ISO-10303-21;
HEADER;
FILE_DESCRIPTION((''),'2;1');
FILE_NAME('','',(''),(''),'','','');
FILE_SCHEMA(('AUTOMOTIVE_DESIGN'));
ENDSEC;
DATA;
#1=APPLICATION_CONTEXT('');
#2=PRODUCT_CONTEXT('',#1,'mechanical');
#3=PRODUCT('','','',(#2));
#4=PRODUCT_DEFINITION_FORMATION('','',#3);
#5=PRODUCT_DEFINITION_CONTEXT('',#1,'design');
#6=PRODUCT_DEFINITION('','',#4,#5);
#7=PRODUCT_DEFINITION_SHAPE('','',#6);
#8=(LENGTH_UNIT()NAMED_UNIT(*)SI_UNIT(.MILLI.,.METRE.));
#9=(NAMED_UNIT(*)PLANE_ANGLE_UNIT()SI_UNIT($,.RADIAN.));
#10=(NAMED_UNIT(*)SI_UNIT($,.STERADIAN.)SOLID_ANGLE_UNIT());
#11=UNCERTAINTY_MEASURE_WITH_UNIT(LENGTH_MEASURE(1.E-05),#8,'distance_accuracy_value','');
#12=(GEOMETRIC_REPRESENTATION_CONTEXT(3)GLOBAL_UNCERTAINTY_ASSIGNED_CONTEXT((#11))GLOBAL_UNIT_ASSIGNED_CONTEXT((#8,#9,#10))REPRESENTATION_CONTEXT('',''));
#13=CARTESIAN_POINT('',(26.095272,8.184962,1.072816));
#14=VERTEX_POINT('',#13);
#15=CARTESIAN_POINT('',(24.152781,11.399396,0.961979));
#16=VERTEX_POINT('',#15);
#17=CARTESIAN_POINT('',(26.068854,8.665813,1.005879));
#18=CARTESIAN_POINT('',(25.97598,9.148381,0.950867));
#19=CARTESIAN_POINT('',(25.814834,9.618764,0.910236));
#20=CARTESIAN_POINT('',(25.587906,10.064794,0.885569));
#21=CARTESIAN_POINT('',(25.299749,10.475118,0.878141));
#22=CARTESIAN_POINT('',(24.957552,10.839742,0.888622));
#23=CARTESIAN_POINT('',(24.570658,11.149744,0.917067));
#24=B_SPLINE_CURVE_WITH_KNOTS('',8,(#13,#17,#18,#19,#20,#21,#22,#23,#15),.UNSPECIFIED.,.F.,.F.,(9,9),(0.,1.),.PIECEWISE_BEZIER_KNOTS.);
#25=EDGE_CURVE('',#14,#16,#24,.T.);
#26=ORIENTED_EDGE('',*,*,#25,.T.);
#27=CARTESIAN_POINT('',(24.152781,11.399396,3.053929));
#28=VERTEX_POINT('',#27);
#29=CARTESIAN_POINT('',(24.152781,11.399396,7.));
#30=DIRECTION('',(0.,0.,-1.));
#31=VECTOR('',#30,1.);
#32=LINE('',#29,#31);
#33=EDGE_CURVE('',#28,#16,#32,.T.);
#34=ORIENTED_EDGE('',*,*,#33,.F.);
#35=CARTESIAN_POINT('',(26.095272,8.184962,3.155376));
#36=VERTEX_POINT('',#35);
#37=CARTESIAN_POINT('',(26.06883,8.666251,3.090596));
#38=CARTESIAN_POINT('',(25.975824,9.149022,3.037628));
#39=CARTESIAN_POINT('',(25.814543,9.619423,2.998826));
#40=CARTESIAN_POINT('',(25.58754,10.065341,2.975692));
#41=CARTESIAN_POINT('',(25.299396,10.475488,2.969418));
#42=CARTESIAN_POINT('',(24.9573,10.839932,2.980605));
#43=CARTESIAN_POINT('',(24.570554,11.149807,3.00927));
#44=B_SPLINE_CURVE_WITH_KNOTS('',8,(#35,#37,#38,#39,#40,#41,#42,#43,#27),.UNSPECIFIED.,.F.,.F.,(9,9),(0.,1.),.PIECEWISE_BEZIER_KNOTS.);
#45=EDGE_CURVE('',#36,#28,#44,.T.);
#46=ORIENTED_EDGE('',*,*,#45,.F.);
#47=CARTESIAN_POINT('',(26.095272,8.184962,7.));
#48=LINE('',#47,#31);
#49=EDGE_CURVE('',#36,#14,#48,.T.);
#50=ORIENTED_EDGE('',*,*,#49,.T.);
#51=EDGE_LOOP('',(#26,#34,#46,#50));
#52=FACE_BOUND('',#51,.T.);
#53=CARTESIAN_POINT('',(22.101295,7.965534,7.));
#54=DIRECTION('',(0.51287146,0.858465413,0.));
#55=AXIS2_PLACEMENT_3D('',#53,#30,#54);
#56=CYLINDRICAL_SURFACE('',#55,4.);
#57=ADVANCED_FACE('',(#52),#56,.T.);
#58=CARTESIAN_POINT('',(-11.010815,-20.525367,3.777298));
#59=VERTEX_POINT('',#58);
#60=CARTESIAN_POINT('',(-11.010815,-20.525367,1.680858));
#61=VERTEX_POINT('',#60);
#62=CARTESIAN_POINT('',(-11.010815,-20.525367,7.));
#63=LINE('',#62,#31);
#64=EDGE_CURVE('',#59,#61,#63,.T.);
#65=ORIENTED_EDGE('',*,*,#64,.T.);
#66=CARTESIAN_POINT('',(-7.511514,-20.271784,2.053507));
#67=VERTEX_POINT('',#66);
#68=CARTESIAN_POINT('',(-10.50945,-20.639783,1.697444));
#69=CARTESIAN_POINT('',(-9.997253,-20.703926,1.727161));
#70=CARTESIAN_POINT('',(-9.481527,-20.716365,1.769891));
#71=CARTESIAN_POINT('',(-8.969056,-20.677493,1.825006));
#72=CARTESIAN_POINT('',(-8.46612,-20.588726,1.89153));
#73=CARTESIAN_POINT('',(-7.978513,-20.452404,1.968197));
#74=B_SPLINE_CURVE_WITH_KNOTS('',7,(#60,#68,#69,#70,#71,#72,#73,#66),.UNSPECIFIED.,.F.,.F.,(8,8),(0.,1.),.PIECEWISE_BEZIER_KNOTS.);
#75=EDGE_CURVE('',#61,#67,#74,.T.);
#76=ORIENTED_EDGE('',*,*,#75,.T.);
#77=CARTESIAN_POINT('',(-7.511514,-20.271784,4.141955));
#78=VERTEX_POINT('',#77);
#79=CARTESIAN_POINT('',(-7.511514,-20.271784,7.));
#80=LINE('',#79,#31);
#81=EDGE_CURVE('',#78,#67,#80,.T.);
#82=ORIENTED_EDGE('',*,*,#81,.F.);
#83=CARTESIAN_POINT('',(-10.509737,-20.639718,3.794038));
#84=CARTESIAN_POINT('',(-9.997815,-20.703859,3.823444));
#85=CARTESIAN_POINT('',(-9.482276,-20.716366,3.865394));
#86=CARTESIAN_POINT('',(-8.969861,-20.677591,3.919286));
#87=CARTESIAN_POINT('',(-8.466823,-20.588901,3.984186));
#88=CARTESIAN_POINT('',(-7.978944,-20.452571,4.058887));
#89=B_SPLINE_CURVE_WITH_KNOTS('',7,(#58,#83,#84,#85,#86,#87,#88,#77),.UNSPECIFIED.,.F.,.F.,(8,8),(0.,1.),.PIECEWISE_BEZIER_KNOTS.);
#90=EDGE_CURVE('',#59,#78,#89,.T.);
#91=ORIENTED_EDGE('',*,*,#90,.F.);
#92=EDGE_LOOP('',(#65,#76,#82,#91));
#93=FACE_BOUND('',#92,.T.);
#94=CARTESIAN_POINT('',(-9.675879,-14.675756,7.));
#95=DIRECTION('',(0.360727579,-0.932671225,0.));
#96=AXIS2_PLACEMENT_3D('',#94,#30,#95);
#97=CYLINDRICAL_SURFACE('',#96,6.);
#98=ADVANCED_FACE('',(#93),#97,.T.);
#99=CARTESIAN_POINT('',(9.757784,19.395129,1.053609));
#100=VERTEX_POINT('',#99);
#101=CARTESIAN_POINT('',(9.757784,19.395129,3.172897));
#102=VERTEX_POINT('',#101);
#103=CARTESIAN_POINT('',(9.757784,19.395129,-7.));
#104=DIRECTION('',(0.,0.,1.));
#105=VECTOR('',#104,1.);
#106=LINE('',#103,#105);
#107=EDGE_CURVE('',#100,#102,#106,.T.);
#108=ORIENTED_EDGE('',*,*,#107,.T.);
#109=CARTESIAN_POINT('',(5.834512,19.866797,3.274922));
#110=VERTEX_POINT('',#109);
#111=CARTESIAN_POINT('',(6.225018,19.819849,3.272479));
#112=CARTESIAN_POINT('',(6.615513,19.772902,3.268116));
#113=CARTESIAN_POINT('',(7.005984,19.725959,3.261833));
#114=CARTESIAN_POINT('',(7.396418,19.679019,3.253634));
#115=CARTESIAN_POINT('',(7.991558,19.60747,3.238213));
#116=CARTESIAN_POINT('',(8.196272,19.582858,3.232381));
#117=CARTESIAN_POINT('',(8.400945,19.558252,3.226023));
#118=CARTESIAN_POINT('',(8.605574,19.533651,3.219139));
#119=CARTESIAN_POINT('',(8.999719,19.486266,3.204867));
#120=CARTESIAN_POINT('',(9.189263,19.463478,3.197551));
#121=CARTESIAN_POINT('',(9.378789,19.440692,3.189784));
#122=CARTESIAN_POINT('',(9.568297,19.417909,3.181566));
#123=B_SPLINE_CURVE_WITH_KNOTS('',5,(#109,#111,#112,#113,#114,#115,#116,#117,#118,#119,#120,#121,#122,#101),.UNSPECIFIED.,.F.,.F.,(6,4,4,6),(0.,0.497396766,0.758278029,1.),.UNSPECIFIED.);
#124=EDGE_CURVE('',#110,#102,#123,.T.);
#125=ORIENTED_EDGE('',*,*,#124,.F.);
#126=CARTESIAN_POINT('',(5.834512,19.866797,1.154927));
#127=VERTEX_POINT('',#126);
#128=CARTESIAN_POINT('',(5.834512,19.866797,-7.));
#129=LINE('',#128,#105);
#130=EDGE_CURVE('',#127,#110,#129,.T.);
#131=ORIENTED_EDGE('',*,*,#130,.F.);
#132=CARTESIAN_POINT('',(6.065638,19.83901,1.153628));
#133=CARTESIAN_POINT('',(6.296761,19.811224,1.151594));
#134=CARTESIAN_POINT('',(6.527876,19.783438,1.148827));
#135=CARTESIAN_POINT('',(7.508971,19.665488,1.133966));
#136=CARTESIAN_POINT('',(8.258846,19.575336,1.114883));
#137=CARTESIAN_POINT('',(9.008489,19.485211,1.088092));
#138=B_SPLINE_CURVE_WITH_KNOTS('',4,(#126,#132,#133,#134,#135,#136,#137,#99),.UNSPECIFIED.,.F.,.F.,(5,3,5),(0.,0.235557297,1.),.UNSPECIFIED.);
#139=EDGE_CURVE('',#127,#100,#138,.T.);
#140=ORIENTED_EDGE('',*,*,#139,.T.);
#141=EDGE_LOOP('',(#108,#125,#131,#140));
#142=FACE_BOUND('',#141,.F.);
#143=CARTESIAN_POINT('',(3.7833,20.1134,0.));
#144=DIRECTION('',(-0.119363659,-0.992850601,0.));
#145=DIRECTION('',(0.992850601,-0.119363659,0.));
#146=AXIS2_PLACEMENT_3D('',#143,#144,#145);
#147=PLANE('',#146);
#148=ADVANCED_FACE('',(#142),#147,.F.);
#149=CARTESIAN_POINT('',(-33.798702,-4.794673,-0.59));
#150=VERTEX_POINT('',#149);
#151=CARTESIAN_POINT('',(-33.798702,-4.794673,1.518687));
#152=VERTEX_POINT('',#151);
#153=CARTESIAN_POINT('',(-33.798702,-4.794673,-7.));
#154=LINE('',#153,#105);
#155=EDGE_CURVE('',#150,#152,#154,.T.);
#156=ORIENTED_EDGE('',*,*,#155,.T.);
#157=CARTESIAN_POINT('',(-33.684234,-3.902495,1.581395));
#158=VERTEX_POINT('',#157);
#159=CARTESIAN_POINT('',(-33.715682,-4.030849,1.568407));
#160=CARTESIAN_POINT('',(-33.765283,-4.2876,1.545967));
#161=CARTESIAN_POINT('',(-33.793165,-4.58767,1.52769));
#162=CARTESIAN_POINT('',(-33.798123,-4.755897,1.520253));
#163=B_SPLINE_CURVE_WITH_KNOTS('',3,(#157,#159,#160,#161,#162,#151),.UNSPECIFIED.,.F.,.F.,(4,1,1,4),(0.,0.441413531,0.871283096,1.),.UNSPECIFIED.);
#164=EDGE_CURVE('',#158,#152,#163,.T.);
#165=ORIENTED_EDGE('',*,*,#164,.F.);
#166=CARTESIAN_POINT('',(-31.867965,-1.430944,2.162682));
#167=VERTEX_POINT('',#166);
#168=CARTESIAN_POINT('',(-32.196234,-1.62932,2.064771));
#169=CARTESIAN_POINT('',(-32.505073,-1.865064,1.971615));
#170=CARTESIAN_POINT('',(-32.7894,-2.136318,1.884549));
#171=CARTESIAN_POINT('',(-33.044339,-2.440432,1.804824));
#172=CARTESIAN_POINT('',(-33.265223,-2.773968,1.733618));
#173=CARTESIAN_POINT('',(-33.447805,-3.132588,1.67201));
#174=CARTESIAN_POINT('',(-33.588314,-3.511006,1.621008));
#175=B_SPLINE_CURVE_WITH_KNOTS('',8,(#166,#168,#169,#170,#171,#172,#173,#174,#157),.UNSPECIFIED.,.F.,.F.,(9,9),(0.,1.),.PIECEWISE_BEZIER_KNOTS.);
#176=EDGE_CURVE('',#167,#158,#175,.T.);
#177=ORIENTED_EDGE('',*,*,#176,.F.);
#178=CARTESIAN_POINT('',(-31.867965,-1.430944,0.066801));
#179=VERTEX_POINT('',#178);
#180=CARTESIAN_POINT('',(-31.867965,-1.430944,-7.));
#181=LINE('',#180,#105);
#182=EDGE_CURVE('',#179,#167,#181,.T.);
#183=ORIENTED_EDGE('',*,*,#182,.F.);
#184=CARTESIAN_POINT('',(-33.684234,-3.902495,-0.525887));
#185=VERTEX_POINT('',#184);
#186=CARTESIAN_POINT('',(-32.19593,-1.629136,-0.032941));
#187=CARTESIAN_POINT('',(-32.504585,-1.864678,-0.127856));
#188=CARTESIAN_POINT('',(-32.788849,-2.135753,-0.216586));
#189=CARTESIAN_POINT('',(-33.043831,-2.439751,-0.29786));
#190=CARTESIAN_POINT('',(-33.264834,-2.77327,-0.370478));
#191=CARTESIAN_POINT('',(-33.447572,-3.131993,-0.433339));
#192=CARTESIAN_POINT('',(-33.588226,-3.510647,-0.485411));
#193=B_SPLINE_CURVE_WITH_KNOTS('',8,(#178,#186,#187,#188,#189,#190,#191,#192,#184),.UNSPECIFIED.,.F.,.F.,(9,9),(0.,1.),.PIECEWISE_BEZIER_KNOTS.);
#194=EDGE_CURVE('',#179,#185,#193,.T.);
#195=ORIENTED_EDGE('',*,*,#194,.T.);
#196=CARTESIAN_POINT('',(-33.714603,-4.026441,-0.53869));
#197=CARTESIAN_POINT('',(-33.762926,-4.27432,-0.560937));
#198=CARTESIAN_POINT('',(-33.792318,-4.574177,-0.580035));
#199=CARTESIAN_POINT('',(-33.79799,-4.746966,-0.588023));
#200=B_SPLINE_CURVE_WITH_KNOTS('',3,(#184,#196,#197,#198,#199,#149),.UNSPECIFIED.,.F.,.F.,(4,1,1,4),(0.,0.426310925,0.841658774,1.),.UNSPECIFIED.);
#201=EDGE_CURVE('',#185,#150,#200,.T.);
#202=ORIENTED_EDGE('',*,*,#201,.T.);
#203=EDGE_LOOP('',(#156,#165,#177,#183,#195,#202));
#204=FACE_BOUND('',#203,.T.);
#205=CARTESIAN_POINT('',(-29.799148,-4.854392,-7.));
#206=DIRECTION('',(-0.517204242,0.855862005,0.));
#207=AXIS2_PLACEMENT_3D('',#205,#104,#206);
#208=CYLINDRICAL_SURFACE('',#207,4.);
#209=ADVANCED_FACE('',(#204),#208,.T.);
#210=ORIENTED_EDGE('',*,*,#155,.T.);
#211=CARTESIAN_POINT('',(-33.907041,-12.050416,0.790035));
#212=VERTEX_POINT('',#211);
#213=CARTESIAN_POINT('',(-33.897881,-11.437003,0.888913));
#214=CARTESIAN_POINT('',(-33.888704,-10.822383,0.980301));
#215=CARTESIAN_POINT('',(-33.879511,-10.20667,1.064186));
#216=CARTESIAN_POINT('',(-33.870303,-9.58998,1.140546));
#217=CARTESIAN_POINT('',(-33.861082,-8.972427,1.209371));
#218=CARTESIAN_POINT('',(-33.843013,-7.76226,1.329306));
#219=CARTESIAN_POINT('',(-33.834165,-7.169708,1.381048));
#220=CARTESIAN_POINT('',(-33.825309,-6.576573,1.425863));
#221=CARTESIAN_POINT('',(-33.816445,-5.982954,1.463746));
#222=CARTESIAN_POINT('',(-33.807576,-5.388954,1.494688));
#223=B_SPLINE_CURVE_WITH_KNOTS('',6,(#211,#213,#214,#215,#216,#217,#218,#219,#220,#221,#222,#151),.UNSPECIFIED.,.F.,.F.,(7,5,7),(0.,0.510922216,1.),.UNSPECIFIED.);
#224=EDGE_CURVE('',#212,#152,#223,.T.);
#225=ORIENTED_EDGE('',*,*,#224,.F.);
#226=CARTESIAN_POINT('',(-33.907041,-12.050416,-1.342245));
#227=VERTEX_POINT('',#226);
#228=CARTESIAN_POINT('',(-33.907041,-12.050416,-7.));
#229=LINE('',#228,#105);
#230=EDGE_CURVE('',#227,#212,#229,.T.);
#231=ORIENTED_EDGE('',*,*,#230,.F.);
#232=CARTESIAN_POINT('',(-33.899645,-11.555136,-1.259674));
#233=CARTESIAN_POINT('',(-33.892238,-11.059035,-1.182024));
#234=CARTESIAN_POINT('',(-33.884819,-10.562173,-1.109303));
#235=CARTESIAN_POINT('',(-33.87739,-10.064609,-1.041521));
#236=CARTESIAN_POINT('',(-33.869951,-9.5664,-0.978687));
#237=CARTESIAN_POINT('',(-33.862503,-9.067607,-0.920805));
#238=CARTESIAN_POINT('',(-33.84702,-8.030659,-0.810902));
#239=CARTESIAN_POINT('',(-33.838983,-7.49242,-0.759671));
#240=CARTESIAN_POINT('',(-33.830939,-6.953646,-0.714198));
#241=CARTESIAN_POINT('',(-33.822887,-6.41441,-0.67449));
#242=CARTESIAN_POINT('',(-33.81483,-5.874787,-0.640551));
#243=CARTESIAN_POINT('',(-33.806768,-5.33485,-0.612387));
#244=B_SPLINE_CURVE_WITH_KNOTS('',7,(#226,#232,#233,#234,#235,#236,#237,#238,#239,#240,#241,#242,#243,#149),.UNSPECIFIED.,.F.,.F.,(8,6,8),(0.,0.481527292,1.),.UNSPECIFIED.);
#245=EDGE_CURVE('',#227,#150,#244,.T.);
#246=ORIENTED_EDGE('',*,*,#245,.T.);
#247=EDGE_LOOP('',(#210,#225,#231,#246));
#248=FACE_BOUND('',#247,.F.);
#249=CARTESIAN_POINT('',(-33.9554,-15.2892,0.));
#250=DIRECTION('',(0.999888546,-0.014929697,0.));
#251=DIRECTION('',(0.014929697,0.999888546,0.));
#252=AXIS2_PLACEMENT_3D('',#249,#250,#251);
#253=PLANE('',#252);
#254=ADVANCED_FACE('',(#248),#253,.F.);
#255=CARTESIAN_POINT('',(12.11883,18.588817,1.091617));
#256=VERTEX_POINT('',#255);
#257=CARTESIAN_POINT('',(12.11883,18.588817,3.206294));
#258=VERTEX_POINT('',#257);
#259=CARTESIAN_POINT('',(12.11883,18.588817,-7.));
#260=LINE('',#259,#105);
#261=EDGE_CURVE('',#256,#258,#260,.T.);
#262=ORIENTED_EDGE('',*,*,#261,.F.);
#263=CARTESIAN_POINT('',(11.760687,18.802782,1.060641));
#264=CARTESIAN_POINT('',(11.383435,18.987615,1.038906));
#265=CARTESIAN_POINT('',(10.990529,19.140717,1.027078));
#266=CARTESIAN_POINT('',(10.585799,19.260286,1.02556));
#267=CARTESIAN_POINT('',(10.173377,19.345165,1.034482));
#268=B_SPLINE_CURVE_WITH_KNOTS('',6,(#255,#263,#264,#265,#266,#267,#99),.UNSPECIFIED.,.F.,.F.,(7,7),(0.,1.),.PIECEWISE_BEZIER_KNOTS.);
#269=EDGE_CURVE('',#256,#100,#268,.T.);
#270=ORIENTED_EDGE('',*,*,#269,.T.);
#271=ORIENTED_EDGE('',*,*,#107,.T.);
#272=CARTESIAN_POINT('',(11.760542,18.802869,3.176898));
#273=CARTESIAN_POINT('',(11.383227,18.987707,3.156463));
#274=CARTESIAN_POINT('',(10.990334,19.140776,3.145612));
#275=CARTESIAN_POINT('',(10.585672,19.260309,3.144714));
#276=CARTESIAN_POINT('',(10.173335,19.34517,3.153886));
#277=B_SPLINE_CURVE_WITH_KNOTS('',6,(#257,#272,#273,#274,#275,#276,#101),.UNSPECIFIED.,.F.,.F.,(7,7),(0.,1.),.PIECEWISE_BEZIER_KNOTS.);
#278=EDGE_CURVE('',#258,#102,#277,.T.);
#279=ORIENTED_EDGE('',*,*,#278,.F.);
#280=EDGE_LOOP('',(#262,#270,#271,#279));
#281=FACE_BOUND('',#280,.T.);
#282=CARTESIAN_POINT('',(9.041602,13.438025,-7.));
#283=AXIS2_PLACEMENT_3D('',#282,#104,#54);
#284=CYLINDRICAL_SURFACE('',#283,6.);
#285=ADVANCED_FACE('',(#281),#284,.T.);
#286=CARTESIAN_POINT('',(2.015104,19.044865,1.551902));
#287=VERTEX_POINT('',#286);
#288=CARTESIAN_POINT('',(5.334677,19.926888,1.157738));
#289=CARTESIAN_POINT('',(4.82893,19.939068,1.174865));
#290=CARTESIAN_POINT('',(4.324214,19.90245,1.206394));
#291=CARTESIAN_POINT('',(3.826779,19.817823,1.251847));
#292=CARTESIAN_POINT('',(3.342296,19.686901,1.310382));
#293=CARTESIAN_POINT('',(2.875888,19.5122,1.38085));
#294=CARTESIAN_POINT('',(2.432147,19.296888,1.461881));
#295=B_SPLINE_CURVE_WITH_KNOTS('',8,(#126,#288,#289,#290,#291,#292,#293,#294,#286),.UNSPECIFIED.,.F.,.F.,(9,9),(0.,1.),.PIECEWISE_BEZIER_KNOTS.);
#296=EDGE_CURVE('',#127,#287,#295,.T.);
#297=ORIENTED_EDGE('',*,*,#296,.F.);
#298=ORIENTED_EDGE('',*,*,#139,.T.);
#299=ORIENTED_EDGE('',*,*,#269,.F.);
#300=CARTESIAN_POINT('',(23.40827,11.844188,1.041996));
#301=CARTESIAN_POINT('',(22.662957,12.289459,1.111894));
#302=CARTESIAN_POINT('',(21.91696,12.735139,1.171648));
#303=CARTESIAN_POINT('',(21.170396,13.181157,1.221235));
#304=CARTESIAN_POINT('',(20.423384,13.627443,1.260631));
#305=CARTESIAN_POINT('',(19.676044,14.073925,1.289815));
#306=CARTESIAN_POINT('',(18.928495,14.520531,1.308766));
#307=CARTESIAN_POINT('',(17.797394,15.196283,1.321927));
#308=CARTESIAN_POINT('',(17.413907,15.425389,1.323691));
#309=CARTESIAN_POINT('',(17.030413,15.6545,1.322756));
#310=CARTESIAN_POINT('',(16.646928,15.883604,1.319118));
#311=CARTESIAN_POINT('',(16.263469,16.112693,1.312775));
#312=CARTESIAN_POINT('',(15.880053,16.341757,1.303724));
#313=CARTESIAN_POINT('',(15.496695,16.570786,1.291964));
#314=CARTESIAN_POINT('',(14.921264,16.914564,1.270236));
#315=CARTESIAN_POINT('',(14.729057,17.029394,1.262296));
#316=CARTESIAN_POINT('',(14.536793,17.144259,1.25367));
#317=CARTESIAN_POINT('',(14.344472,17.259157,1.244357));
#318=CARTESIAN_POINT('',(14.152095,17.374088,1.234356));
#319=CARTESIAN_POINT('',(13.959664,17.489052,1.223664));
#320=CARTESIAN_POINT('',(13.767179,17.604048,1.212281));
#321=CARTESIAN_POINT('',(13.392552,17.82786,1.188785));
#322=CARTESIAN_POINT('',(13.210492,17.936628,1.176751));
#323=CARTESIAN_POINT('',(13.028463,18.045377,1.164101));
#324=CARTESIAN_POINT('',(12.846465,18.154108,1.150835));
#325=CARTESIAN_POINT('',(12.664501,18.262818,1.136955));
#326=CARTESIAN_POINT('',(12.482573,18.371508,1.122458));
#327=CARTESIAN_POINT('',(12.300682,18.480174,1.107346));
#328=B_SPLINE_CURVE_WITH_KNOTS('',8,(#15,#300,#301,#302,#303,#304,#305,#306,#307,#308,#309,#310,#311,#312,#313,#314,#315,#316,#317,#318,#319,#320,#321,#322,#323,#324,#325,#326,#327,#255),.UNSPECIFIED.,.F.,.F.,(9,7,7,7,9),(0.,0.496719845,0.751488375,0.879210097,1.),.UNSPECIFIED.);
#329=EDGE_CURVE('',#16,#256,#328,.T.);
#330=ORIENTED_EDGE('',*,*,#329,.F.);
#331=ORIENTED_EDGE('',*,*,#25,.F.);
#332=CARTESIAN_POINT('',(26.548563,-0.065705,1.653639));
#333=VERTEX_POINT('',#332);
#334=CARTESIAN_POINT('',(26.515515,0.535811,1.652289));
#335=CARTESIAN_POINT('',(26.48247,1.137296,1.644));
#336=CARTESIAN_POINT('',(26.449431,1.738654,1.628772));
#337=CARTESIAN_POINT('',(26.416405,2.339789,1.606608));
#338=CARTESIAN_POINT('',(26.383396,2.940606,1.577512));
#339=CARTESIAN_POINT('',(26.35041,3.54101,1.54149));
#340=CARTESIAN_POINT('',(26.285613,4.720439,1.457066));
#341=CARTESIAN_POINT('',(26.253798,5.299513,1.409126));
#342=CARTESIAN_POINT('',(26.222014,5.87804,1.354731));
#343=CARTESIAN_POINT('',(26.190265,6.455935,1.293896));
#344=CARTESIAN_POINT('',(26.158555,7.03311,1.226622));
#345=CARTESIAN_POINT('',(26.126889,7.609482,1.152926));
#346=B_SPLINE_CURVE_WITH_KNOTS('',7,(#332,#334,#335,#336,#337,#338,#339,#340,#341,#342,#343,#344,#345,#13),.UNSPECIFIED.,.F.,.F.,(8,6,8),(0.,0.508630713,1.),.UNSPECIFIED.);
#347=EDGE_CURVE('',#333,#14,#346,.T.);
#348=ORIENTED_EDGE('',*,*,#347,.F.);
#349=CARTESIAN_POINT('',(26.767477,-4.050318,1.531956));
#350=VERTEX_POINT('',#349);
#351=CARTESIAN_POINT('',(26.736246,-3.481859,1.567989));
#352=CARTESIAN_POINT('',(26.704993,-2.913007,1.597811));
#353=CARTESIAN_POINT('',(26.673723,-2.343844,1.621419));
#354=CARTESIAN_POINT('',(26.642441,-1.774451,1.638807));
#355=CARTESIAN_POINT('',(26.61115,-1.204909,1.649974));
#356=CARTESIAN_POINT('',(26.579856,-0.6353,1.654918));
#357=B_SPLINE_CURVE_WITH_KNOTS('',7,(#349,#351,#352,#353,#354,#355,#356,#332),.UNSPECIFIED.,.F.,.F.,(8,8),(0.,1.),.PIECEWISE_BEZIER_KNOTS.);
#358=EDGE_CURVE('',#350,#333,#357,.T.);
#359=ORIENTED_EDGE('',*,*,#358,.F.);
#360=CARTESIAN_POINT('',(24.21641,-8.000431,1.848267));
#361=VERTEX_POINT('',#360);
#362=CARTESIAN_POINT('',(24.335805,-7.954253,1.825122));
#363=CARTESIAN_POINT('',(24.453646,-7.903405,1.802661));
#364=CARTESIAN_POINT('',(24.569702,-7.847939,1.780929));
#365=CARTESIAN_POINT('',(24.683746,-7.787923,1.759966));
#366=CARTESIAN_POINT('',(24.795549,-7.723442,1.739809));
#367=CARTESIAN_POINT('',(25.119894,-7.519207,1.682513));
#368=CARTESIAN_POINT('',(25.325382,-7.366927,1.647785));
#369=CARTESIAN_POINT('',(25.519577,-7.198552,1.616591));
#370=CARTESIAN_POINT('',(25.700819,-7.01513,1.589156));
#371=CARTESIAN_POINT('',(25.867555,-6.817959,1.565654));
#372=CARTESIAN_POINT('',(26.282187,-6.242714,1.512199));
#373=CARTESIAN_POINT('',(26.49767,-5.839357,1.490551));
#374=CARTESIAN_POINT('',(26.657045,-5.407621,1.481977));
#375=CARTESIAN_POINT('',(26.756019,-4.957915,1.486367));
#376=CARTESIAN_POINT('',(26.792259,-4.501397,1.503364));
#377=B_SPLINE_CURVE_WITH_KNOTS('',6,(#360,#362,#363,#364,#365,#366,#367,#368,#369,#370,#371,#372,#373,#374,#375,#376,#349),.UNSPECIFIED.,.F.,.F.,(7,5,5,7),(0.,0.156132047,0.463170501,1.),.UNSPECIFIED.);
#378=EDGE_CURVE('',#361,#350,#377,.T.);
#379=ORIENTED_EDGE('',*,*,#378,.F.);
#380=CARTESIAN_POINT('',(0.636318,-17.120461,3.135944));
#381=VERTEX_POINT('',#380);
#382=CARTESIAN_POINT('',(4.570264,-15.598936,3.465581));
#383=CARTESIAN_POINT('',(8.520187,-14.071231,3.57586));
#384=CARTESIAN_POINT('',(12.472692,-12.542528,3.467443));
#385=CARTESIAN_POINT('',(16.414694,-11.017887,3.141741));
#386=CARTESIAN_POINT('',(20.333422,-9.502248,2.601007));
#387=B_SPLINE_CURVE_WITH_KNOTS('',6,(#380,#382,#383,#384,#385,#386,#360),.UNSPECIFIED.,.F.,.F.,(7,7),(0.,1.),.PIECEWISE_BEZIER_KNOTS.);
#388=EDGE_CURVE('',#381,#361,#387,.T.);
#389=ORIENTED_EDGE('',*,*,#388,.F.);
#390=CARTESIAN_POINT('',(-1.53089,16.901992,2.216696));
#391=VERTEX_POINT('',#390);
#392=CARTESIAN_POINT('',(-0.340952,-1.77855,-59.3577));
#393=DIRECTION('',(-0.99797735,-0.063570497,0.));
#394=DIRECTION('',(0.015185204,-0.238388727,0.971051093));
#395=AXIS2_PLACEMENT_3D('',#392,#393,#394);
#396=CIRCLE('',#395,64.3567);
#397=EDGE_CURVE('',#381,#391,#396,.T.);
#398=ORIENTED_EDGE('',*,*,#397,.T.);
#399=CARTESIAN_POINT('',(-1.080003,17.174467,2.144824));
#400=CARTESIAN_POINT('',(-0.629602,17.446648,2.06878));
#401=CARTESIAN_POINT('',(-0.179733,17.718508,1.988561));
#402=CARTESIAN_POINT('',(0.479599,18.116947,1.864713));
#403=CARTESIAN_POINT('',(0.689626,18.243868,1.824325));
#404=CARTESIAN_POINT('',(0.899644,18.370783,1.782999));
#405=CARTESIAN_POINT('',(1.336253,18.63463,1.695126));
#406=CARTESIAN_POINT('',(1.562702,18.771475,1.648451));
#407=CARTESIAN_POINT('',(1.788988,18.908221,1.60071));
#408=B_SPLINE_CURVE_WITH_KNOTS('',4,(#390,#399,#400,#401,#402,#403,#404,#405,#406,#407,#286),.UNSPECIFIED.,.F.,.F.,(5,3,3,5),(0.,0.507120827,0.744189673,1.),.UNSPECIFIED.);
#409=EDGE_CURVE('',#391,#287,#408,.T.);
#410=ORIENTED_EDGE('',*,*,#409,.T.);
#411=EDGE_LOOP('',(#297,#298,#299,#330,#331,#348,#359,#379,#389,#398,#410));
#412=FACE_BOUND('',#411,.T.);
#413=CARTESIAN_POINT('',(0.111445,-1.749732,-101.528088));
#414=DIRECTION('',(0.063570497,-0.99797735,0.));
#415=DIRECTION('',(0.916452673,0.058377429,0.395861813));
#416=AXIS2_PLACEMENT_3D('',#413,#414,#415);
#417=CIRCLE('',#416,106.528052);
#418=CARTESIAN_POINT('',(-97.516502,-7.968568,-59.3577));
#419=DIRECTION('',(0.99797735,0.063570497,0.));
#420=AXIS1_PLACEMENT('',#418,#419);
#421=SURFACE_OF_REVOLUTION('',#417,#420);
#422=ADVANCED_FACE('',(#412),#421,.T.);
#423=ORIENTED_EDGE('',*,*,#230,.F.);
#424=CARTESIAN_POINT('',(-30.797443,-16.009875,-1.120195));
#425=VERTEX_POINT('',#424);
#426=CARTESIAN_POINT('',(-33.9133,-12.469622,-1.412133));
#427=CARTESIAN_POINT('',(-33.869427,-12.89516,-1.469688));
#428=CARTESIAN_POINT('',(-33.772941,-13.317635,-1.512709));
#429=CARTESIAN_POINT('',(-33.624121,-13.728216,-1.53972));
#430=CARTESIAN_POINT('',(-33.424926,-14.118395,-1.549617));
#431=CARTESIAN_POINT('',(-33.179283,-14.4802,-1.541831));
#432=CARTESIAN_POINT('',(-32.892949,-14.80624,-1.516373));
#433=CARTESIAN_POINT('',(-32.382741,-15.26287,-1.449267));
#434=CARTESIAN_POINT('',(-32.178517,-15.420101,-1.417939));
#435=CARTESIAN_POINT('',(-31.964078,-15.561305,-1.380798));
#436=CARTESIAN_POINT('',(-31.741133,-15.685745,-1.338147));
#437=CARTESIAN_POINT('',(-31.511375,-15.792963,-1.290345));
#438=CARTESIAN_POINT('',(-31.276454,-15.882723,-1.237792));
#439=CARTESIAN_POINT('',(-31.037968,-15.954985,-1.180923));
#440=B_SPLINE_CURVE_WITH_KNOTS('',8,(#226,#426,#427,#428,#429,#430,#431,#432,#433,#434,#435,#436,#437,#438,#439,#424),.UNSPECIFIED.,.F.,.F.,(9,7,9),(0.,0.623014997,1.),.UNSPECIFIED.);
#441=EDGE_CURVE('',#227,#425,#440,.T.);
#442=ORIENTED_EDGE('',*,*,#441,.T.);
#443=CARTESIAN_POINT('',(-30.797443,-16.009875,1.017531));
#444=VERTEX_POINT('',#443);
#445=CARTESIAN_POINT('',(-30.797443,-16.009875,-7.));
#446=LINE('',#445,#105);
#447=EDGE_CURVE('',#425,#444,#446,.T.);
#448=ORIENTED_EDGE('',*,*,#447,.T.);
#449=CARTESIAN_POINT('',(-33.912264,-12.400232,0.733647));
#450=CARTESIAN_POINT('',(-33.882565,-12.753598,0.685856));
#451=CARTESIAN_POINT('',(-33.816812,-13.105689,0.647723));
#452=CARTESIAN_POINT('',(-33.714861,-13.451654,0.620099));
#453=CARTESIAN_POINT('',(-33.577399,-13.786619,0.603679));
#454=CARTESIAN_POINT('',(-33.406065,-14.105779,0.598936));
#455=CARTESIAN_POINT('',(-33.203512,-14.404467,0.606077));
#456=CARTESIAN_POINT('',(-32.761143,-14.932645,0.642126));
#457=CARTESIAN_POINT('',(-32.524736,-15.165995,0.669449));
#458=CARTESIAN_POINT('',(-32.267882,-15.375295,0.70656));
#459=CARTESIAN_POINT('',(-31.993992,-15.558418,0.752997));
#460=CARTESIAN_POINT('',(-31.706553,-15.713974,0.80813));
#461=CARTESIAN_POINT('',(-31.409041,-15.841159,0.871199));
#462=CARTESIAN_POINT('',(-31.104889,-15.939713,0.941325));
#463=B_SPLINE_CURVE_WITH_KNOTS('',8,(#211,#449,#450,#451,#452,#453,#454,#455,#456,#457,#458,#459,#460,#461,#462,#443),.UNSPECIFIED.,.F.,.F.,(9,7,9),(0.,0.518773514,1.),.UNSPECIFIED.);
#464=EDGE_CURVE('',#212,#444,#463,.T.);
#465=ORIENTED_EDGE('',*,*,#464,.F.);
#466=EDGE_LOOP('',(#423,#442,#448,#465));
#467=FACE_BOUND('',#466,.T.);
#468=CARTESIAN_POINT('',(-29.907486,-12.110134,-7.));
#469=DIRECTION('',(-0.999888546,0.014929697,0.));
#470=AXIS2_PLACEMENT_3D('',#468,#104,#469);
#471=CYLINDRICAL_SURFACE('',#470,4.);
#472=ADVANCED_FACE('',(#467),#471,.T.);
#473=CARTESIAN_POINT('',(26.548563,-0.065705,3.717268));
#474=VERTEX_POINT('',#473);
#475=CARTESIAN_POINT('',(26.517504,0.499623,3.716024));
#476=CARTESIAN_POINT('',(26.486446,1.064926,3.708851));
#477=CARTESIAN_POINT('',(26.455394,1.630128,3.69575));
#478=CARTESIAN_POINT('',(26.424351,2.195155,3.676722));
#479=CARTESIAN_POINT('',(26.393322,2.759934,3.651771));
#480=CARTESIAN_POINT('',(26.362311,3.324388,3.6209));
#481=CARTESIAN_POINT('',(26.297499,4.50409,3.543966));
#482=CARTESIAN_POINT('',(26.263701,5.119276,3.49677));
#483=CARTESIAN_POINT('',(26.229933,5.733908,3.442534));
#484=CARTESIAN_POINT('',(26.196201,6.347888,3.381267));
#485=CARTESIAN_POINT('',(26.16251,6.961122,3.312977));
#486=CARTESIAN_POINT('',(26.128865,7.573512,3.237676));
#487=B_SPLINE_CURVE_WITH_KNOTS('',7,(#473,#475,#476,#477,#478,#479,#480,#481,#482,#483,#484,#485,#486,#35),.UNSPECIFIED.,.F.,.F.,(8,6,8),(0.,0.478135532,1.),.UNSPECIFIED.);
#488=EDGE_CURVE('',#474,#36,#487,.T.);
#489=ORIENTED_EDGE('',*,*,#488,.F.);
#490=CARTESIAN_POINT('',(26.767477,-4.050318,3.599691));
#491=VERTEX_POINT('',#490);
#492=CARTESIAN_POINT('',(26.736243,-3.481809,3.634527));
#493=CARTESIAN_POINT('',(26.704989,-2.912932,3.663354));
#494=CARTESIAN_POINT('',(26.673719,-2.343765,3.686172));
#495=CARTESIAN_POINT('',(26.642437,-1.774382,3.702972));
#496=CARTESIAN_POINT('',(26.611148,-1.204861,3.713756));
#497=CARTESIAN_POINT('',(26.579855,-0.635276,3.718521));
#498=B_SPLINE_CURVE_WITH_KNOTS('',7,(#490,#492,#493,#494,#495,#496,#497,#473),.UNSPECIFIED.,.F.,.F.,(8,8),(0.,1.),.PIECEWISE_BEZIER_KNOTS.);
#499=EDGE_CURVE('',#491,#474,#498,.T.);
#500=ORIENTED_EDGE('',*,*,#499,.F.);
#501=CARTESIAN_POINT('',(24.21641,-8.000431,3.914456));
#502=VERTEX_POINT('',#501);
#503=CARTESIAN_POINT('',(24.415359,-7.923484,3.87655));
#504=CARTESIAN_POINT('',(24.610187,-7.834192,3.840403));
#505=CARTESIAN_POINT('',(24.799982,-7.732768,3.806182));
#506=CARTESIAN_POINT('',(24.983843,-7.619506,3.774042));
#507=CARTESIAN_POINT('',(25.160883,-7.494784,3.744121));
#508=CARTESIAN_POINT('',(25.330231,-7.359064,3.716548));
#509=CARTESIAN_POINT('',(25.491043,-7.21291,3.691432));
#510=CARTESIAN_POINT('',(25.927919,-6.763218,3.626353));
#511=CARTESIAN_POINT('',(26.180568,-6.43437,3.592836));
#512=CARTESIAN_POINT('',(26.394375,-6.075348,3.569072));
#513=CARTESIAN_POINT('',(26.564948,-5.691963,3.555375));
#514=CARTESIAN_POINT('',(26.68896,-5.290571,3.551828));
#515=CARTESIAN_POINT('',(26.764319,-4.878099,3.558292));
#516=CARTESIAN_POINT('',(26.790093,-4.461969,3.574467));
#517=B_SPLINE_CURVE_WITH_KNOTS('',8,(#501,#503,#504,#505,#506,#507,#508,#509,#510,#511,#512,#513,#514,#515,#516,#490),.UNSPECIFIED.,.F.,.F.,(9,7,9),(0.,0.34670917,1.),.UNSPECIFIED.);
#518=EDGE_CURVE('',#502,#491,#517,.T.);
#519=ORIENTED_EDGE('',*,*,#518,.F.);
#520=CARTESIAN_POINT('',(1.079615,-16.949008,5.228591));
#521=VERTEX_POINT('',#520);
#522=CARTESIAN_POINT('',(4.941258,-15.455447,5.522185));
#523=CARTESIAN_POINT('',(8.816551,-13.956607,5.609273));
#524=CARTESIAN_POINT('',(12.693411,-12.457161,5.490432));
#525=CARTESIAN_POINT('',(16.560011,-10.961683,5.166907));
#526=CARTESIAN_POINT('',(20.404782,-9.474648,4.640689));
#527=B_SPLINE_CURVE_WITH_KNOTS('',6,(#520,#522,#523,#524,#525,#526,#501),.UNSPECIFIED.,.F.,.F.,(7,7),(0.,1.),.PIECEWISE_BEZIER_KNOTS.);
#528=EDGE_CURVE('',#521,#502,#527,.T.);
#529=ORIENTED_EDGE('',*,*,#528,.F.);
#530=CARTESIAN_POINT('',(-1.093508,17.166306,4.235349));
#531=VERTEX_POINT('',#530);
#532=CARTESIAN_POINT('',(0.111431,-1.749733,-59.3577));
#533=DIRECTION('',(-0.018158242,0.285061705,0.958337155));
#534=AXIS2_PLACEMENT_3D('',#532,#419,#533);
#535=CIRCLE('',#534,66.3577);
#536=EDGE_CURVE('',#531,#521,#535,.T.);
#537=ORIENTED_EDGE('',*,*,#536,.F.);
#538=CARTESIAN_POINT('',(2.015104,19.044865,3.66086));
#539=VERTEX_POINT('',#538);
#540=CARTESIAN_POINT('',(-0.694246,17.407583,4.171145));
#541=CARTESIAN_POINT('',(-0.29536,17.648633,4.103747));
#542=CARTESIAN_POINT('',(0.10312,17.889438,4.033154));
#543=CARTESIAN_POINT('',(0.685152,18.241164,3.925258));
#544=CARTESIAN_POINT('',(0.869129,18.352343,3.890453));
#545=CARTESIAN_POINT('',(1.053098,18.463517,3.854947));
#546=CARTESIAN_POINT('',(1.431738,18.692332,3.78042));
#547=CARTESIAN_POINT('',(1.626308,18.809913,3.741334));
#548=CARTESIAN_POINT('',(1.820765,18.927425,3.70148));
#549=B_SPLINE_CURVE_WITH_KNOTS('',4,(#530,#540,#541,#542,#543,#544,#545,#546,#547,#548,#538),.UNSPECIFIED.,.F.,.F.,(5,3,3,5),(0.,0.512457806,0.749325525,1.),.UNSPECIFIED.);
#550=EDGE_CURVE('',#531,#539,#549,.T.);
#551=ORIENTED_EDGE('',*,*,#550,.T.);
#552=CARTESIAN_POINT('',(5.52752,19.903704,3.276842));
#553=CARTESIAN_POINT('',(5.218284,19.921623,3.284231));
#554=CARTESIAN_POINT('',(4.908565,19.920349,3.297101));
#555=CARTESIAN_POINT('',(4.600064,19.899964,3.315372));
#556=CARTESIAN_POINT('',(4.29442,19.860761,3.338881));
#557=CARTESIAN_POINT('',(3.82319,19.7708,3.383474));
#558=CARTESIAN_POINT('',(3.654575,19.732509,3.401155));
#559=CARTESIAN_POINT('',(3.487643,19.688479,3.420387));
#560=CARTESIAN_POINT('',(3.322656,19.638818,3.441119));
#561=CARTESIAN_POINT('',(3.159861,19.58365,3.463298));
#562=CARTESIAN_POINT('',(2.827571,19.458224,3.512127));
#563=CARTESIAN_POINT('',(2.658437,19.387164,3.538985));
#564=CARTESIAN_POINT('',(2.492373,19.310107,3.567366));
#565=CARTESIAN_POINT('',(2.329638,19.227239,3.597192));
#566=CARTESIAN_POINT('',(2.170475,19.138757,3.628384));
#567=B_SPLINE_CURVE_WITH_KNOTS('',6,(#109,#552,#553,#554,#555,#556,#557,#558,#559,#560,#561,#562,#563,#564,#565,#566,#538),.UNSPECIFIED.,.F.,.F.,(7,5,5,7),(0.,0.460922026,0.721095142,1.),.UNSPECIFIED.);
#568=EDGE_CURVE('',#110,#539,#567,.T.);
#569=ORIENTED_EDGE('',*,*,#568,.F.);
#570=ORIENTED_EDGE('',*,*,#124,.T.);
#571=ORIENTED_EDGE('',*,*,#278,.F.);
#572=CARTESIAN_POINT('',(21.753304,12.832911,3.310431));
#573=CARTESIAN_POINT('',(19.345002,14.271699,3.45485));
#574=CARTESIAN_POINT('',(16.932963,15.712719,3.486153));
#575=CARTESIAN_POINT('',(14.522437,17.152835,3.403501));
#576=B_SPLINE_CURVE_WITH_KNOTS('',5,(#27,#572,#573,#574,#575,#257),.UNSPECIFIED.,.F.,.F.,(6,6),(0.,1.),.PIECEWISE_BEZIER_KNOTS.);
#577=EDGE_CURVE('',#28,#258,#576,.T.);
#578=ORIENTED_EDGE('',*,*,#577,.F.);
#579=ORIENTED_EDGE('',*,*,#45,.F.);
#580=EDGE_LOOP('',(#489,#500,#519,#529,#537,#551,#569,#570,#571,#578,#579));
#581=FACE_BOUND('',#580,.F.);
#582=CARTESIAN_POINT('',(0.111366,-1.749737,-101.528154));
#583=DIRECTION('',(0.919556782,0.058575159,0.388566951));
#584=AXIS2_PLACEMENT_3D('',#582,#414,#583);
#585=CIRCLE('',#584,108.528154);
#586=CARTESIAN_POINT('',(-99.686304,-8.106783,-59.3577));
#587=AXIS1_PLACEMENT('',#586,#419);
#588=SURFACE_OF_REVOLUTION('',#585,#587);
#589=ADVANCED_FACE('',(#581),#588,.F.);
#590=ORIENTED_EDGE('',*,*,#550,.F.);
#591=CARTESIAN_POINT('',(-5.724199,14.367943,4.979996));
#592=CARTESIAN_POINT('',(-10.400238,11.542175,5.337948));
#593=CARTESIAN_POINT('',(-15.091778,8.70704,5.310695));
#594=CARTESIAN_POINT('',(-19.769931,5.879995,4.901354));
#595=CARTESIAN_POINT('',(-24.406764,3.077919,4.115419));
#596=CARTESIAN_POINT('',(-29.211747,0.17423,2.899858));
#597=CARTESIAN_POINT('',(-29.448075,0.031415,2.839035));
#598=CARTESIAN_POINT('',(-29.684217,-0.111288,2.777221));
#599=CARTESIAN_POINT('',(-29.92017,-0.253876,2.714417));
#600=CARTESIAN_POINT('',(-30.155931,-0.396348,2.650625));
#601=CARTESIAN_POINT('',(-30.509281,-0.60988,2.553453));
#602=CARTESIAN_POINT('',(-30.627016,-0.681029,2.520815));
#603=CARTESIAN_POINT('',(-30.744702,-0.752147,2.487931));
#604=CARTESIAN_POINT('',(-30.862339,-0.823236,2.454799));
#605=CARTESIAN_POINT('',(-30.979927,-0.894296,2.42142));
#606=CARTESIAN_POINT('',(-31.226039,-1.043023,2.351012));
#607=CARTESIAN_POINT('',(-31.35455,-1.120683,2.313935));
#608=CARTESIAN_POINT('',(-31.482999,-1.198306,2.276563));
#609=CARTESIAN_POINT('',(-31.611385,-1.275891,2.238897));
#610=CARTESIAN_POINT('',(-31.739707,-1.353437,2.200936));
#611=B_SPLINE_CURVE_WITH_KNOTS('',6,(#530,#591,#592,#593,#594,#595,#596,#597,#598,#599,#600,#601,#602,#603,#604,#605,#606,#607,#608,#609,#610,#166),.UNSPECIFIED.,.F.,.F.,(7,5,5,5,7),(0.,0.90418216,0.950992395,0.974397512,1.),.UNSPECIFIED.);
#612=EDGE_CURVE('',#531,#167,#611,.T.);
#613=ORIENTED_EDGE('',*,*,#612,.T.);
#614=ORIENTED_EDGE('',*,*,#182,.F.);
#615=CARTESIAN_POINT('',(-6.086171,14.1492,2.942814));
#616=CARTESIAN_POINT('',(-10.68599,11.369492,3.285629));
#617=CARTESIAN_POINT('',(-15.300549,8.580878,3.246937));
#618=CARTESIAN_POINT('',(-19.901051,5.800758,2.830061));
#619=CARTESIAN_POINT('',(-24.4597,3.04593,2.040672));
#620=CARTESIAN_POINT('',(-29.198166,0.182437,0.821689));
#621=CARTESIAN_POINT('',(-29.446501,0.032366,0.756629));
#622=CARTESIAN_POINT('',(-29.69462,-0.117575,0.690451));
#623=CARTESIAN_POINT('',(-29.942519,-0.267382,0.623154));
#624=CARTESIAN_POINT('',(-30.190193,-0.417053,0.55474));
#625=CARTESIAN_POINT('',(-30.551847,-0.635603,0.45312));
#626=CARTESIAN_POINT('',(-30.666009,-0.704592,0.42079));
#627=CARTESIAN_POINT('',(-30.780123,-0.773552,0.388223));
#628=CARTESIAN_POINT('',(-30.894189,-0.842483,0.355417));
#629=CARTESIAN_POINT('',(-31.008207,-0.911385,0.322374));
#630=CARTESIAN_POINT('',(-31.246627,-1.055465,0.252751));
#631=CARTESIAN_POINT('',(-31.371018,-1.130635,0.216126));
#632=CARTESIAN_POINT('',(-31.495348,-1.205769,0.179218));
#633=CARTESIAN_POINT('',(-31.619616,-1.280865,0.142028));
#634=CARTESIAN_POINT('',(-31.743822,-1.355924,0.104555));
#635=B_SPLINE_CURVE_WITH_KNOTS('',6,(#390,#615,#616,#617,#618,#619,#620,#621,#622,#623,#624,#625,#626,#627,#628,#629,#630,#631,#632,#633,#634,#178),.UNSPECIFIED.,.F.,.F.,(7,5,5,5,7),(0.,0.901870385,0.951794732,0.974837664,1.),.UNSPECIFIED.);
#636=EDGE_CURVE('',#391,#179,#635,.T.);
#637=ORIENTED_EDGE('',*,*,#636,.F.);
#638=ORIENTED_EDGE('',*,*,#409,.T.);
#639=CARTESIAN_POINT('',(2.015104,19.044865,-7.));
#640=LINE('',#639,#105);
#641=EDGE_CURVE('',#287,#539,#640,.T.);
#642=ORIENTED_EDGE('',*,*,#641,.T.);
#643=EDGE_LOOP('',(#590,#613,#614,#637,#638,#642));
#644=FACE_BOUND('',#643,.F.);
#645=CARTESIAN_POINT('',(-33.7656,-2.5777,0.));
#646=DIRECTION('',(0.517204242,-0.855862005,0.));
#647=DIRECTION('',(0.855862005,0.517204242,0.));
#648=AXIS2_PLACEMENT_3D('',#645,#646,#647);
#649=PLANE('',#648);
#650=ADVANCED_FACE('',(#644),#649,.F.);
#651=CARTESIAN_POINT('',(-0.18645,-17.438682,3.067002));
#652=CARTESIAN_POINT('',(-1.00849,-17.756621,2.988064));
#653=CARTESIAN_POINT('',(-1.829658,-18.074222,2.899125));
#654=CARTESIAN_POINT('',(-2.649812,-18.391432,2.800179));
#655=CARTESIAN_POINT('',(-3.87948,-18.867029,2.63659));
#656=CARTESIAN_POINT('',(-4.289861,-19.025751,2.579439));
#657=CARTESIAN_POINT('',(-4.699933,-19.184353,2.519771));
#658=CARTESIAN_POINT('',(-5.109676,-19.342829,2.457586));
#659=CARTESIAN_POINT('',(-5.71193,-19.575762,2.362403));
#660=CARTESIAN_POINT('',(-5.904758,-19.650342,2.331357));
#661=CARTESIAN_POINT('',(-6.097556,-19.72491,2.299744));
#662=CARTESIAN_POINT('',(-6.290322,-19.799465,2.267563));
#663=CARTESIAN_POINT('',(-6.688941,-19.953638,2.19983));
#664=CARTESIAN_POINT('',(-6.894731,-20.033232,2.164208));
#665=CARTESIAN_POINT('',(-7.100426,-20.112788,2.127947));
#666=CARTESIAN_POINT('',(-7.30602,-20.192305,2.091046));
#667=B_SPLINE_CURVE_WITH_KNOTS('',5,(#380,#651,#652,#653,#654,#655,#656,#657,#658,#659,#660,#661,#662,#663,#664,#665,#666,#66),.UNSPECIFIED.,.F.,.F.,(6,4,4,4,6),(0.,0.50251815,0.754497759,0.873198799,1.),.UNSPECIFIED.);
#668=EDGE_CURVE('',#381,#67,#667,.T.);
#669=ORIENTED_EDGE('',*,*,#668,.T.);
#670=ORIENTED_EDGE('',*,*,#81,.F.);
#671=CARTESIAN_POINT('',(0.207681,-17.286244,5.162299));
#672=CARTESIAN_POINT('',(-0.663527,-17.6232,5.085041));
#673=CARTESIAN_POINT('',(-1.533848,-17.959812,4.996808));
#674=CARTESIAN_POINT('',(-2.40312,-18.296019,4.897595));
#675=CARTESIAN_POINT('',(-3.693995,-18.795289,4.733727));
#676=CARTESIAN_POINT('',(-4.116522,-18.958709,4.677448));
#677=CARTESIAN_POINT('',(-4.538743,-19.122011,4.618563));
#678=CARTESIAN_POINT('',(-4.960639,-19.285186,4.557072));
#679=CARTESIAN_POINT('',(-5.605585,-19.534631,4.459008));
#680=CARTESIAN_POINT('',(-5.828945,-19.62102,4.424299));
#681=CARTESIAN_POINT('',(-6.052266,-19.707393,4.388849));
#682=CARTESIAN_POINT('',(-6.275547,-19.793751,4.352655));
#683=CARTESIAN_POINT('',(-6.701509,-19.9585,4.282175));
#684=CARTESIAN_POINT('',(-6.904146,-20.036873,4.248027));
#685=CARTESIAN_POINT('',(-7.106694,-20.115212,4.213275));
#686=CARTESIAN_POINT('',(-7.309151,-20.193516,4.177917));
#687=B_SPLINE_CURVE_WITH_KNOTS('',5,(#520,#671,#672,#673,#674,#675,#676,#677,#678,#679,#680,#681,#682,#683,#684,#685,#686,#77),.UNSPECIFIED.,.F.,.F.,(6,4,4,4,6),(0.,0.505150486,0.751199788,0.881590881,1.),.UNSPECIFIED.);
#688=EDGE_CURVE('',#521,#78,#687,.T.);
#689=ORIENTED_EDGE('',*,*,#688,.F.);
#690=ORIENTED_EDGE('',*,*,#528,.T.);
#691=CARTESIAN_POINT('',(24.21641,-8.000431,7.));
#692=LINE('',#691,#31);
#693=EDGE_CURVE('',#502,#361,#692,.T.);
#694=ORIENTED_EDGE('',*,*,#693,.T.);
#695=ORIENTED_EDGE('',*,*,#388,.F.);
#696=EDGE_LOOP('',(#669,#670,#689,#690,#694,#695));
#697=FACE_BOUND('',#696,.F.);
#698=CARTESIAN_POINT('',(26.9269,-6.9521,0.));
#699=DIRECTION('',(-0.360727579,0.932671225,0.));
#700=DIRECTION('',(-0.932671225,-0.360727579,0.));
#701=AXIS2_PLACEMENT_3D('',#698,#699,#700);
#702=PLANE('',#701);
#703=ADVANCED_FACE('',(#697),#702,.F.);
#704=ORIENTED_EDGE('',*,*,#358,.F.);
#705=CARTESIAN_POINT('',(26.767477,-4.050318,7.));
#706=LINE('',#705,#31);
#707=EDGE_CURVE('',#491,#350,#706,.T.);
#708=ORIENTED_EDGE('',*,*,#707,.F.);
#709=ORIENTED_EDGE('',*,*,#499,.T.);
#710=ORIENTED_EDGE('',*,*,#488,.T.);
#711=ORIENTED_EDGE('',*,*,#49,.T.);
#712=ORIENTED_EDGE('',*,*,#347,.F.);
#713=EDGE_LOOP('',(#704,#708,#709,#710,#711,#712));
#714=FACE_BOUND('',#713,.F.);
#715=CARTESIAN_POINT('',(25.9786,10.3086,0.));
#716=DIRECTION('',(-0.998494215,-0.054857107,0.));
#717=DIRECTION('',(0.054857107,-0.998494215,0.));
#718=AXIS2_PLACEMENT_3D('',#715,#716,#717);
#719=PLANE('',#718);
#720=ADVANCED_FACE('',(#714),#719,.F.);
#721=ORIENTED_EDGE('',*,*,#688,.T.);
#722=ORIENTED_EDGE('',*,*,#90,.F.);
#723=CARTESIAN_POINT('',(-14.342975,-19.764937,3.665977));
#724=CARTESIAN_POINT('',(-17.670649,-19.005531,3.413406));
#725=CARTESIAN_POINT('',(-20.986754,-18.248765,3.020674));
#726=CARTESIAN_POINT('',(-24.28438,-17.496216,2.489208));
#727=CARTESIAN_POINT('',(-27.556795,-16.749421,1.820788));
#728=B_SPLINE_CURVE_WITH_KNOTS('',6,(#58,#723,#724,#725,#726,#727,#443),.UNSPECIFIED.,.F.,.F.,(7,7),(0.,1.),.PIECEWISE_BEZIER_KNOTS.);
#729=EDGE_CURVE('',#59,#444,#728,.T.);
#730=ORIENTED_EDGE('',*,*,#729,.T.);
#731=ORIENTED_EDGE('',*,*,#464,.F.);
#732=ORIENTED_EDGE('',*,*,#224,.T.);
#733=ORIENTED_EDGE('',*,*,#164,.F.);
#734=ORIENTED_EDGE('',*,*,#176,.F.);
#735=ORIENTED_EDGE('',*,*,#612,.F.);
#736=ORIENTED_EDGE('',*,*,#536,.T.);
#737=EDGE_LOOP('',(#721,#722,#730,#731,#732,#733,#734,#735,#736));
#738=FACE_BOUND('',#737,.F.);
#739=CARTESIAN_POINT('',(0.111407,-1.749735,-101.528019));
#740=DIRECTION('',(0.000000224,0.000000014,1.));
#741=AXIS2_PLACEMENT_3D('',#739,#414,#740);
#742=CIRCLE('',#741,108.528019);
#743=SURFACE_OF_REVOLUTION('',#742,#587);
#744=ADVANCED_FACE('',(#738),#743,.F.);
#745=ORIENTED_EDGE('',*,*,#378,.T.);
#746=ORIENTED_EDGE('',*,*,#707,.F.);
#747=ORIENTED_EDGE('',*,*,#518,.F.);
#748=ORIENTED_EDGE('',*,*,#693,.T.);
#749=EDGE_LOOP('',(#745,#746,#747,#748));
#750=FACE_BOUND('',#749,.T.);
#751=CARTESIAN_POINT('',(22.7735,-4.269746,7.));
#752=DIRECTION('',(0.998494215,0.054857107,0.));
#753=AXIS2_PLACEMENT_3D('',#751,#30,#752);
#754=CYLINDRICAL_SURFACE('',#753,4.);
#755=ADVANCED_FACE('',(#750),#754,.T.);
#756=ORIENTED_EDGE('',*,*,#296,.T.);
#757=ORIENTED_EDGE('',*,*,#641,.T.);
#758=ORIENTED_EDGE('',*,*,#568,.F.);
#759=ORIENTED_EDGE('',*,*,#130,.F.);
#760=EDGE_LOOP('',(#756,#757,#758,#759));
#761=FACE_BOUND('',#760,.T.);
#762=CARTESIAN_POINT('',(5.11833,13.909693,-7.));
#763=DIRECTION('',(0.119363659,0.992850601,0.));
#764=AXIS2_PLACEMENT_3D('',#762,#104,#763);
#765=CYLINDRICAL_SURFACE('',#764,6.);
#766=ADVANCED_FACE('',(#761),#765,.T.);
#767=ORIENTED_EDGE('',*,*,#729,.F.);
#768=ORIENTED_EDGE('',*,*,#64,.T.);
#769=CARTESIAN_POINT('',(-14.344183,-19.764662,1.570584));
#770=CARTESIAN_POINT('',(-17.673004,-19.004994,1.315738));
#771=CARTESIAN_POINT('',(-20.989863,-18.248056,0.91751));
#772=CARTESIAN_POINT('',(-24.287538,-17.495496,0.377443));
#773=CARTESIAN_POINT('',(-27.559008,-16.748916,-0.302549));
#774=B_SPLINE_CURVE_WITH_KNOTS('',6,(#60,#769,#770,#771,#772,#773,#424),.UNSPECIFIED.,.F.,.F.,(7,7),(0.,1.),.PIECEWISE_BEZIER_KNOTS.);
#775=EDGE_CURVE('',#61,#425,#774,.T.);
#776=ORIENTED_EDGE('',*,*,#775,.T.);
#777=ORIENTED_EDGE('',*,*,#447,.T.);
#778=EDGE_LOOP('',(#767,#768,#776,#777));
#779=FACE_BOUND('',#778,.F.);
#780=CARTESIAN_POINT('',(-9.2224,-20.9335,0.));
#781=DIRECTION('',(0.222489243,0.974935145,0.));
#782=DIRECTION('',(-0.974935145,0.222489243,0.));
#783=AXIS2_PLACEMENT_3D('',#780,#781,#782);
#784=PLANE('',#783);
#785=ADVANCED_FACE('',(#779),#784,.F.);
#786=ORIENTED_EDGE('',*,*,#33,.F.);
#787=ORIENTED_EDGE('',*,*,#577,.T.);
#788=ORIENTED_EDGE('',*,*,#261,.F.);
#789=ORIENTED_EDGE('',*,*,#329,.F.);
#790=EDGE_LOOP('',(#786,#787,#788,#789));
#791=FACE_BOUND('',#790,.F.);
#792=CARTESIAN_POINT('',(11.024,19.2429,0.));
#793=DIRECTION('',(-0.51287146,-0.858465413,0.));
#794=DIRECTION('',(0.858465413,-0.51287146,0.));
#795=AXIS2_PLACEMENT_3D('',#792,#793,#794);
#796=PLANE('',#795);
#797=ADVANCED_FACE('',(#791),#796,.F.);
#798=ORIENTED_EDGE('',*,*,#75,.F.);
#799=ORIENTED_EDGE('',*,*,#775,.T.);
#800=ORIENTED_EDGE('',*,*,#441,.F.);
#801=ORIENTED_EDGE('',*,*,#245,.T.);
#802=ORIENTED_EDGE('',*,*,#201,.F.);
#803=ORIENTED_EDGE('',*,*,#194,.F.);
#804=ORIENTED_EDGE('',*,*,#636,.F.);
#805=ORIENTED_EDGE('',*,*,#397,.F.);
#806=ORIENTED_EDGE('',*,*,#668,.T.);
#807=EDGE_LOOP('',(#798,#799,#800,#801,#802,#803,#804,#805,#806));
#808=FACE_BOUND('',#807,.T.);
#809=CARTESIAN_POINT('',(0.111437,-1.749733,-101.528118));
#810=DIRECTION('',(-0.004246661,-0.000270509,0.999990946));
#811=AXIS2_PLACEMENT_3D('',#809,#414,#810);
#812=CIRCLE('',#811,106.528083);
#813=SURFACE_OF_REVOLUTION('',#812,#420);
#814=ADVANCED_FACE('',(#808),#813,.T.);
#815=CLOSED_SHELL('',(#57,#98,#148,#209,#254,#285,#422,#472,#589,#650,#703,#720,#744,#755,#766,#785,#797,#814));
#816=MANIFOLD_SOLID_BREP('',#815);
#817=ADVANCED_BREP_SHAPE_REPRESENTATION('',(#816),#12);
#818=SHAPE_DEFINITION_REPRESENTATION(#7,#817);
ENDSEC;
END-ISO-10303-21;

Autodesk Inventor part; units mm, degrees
ref_plane "YZ Plane" through (0, 0, 0) normal (1, 0, 0) x (0, 1, 0)
ref_plane "XZ Plane" through (0, 0, 0) normal (0, 1, 0) x (-1, 0, 0)
sketch "Base" plane through (0, 0, 0) normal (0, 0, 1) x (1, 0, 0)
  line L0 (11.024, 19.2429) -> (25.9786, 10.3086)
  line L1 (25.9786, 10.3086) -> (26.9269, -6.9521)
  line L2 (26.9269, -6.9521) -> (-9.2224, -20.9335)
  line L3 (-9.2224, -20.9335) -> (-33.9554, -15.2892)
  line L4 (-33.9554, -15.2892) -> (-33.7656, -2.5777)
  line L5 (-33.7656, -2.5777) -> (3.7833, 20.1134)
  line L6 (3.7833, 20.1134) -> (11.024, 19.2429)
  circle A0 centre (-6.3323, 4.8408) radius 2.5
  circle A1 centre (-11.8617, -1.6151) radius 2.5
  line L7 (-6.3323, 4.8408) -> (-11.8617, -1.6151) construction
  line L8 (2.9132, 5.1838) -> (6.4665, -2.5379) construction
  circle A2 centre (2.9132, 5.1838) radius 2.5
  circle A3 centre (6.4665, -2.5379) radius 2.5
  line L9 (-8.3083, -9.3368) -> (0.1918, -9.3368) construction
  circle A4 centre (0.1918, -9.3368) radius 2.5
  circle A5 centre (-8.3083, -9.3368) radius 2.5
  line L10 (0.6421, 4.1388) -> (4.1954, -3.583)
  line L11 (5.1843, 6.2289) -> (8.7376, -1.4928)
  line L12 (-8.2311, 6.4671) -> (-13.7604, 0.0112)
  line L13 (-4.4336, 3.2146) -> (-9.9629, -3.2413)
  line L14 (-8.3083, -6.8368) -> (0.1918, -6.8368)
  line L15 (-8.3083, -11.8368) -> (0.1918, -11.8368)
  line L16 (-11.8617, -1.6151) -> (-18.4752, -9.3368) construction
  line L17 (-18.4752, -9.3368) -> (-8.3083, -9.3368) construction
  line L18 (-11.8617, -1.6151) -> (-8.3083, -9.3368) construction
  line L19 (-18.4752, -9.3368) -> (4.6899, 1.323) construction
  point P0 (0, 0)
  point P1 (-9.097, 1.6129)
  point P2 (-4.0583, -9.3368)
  dimension "d8" = 146
  dimension "d12" = 108
  dimension "d13" = 124
  dimension "d14" = 156
  dimension "d15" = 142
  dimension "d16" = 122
  dimension "d17" = 59.934
  dimension "d20" = 5
  dimension "d62" = 25.5
extrude "BaseFeature" add sketch "Base" along normal mid plane 14 contours L0 L1 L2 L3 L4 L5 L6 | A0 | A0 L13 A1 L12 | A1 | A2 | A2 L11 A3 L10 | A3 | A4 | A4 L15 A5 L14 | A5
fillet "SmallFilletsFeature" radius 4 4 edges at (-33.7656, -2.5777, 0) (-33.9554, -15.2892, 0) (26.9269, -6.9521, 0) (25.9786, 10.3086, 0)
fillet "LargeFilletsFeature" radius 6 3 edges at (-9.2224, -20.9335, 0) (3.7833, 20.1134, 0) (11.024, 19.2429, 0)
ref_plane "SlopeProfileMiddlePlane" through (-8.6558, -2.3082, 0) normal (0.0635705, -0.9979774, 0) x (0, 0, 1)
ref_plane "SlopeProfilePlane" through (-7.5115, -20.2717, 0) normal (0.0635705, -0.9979774, 0) x (0, 0, 1)
sketch "SlopeProfileIntersect" plane through (-8.6558, -2.3082, 0) normal (0.0635705, -0.9979774, 0) x (0, 0, 1)
  arc A0 (7, -8.785) -> (-59.3577, 91.215) centre (-101.5281, -8.785) ccw
  arc A1 (-59.3577, -108.785) -> (7, -8.785) centre (-101.5281, -8.785) ccw
  line L0 (-59.3577, 91.215) -> (-59.3577, -108.785)
  line L1 (-126.2497, -8.785) -> (46.802, -8.785) construction
  line L2 (7, -12.0068) -> (7, 23.1095) construction
  point P0 (0, -8.785)
  point P1 (-59.3577, -8.785)
  dimension "d72" = 66.3577
  dimension "d84" = 200
revolve "SlopeProfileIntersectFeature" cut sketch "SlopeProfileIntersect" angle 360 about axis through (-99.6863, -8.1067, -59.3577) along (0.9979774, 0.0635705, 0) keep common part
sketch "SlopeProfileSubtract" plane through (-8.6558, -2.3082, 0) normal (0.0635705, -0.9979774, 0) x (0, 0, 1)
  arc A0 (7, -8.785) -> (-59.3577, 91.215) centre (-101.5281, -8.785) ccw construction
  arc A1 (-59.3577, -108.785) -> (7, -8.785) centre (-101.5281, -8.785) ccw construction
  arc A2 (4.999, -8.3317) -> (-59.3577, 89.0408) centre (-101.5281, -8.785) ccw
  arc A3 (-59.3577, -106.6108) -> (4.999, -8.3317) centre (-101.5281, -8.785) ccw
  line L0 (-59.3577, 89.0408) -> (-59.3577, -106.6108)
  line L1 (-126.2497, -8.785) -> (46.802, -8.785) construction
  line L2 (-59.3577, 89.0408) -> (-59.3577, 91.215) construction
  point P0 (0, -8.785)
  point P1 (-59.3577, -8.785)
  dimension "d70" = 2
revolve "SlopeProfileSubtractFeature" cut sketch "SlopeProfileSubtract" angle 360 about axis through (-97.5165, -7.9685, -59.3577) along (0.9979774, 0.0635705, 0)
properties part number "ShadeBasicLeft"
